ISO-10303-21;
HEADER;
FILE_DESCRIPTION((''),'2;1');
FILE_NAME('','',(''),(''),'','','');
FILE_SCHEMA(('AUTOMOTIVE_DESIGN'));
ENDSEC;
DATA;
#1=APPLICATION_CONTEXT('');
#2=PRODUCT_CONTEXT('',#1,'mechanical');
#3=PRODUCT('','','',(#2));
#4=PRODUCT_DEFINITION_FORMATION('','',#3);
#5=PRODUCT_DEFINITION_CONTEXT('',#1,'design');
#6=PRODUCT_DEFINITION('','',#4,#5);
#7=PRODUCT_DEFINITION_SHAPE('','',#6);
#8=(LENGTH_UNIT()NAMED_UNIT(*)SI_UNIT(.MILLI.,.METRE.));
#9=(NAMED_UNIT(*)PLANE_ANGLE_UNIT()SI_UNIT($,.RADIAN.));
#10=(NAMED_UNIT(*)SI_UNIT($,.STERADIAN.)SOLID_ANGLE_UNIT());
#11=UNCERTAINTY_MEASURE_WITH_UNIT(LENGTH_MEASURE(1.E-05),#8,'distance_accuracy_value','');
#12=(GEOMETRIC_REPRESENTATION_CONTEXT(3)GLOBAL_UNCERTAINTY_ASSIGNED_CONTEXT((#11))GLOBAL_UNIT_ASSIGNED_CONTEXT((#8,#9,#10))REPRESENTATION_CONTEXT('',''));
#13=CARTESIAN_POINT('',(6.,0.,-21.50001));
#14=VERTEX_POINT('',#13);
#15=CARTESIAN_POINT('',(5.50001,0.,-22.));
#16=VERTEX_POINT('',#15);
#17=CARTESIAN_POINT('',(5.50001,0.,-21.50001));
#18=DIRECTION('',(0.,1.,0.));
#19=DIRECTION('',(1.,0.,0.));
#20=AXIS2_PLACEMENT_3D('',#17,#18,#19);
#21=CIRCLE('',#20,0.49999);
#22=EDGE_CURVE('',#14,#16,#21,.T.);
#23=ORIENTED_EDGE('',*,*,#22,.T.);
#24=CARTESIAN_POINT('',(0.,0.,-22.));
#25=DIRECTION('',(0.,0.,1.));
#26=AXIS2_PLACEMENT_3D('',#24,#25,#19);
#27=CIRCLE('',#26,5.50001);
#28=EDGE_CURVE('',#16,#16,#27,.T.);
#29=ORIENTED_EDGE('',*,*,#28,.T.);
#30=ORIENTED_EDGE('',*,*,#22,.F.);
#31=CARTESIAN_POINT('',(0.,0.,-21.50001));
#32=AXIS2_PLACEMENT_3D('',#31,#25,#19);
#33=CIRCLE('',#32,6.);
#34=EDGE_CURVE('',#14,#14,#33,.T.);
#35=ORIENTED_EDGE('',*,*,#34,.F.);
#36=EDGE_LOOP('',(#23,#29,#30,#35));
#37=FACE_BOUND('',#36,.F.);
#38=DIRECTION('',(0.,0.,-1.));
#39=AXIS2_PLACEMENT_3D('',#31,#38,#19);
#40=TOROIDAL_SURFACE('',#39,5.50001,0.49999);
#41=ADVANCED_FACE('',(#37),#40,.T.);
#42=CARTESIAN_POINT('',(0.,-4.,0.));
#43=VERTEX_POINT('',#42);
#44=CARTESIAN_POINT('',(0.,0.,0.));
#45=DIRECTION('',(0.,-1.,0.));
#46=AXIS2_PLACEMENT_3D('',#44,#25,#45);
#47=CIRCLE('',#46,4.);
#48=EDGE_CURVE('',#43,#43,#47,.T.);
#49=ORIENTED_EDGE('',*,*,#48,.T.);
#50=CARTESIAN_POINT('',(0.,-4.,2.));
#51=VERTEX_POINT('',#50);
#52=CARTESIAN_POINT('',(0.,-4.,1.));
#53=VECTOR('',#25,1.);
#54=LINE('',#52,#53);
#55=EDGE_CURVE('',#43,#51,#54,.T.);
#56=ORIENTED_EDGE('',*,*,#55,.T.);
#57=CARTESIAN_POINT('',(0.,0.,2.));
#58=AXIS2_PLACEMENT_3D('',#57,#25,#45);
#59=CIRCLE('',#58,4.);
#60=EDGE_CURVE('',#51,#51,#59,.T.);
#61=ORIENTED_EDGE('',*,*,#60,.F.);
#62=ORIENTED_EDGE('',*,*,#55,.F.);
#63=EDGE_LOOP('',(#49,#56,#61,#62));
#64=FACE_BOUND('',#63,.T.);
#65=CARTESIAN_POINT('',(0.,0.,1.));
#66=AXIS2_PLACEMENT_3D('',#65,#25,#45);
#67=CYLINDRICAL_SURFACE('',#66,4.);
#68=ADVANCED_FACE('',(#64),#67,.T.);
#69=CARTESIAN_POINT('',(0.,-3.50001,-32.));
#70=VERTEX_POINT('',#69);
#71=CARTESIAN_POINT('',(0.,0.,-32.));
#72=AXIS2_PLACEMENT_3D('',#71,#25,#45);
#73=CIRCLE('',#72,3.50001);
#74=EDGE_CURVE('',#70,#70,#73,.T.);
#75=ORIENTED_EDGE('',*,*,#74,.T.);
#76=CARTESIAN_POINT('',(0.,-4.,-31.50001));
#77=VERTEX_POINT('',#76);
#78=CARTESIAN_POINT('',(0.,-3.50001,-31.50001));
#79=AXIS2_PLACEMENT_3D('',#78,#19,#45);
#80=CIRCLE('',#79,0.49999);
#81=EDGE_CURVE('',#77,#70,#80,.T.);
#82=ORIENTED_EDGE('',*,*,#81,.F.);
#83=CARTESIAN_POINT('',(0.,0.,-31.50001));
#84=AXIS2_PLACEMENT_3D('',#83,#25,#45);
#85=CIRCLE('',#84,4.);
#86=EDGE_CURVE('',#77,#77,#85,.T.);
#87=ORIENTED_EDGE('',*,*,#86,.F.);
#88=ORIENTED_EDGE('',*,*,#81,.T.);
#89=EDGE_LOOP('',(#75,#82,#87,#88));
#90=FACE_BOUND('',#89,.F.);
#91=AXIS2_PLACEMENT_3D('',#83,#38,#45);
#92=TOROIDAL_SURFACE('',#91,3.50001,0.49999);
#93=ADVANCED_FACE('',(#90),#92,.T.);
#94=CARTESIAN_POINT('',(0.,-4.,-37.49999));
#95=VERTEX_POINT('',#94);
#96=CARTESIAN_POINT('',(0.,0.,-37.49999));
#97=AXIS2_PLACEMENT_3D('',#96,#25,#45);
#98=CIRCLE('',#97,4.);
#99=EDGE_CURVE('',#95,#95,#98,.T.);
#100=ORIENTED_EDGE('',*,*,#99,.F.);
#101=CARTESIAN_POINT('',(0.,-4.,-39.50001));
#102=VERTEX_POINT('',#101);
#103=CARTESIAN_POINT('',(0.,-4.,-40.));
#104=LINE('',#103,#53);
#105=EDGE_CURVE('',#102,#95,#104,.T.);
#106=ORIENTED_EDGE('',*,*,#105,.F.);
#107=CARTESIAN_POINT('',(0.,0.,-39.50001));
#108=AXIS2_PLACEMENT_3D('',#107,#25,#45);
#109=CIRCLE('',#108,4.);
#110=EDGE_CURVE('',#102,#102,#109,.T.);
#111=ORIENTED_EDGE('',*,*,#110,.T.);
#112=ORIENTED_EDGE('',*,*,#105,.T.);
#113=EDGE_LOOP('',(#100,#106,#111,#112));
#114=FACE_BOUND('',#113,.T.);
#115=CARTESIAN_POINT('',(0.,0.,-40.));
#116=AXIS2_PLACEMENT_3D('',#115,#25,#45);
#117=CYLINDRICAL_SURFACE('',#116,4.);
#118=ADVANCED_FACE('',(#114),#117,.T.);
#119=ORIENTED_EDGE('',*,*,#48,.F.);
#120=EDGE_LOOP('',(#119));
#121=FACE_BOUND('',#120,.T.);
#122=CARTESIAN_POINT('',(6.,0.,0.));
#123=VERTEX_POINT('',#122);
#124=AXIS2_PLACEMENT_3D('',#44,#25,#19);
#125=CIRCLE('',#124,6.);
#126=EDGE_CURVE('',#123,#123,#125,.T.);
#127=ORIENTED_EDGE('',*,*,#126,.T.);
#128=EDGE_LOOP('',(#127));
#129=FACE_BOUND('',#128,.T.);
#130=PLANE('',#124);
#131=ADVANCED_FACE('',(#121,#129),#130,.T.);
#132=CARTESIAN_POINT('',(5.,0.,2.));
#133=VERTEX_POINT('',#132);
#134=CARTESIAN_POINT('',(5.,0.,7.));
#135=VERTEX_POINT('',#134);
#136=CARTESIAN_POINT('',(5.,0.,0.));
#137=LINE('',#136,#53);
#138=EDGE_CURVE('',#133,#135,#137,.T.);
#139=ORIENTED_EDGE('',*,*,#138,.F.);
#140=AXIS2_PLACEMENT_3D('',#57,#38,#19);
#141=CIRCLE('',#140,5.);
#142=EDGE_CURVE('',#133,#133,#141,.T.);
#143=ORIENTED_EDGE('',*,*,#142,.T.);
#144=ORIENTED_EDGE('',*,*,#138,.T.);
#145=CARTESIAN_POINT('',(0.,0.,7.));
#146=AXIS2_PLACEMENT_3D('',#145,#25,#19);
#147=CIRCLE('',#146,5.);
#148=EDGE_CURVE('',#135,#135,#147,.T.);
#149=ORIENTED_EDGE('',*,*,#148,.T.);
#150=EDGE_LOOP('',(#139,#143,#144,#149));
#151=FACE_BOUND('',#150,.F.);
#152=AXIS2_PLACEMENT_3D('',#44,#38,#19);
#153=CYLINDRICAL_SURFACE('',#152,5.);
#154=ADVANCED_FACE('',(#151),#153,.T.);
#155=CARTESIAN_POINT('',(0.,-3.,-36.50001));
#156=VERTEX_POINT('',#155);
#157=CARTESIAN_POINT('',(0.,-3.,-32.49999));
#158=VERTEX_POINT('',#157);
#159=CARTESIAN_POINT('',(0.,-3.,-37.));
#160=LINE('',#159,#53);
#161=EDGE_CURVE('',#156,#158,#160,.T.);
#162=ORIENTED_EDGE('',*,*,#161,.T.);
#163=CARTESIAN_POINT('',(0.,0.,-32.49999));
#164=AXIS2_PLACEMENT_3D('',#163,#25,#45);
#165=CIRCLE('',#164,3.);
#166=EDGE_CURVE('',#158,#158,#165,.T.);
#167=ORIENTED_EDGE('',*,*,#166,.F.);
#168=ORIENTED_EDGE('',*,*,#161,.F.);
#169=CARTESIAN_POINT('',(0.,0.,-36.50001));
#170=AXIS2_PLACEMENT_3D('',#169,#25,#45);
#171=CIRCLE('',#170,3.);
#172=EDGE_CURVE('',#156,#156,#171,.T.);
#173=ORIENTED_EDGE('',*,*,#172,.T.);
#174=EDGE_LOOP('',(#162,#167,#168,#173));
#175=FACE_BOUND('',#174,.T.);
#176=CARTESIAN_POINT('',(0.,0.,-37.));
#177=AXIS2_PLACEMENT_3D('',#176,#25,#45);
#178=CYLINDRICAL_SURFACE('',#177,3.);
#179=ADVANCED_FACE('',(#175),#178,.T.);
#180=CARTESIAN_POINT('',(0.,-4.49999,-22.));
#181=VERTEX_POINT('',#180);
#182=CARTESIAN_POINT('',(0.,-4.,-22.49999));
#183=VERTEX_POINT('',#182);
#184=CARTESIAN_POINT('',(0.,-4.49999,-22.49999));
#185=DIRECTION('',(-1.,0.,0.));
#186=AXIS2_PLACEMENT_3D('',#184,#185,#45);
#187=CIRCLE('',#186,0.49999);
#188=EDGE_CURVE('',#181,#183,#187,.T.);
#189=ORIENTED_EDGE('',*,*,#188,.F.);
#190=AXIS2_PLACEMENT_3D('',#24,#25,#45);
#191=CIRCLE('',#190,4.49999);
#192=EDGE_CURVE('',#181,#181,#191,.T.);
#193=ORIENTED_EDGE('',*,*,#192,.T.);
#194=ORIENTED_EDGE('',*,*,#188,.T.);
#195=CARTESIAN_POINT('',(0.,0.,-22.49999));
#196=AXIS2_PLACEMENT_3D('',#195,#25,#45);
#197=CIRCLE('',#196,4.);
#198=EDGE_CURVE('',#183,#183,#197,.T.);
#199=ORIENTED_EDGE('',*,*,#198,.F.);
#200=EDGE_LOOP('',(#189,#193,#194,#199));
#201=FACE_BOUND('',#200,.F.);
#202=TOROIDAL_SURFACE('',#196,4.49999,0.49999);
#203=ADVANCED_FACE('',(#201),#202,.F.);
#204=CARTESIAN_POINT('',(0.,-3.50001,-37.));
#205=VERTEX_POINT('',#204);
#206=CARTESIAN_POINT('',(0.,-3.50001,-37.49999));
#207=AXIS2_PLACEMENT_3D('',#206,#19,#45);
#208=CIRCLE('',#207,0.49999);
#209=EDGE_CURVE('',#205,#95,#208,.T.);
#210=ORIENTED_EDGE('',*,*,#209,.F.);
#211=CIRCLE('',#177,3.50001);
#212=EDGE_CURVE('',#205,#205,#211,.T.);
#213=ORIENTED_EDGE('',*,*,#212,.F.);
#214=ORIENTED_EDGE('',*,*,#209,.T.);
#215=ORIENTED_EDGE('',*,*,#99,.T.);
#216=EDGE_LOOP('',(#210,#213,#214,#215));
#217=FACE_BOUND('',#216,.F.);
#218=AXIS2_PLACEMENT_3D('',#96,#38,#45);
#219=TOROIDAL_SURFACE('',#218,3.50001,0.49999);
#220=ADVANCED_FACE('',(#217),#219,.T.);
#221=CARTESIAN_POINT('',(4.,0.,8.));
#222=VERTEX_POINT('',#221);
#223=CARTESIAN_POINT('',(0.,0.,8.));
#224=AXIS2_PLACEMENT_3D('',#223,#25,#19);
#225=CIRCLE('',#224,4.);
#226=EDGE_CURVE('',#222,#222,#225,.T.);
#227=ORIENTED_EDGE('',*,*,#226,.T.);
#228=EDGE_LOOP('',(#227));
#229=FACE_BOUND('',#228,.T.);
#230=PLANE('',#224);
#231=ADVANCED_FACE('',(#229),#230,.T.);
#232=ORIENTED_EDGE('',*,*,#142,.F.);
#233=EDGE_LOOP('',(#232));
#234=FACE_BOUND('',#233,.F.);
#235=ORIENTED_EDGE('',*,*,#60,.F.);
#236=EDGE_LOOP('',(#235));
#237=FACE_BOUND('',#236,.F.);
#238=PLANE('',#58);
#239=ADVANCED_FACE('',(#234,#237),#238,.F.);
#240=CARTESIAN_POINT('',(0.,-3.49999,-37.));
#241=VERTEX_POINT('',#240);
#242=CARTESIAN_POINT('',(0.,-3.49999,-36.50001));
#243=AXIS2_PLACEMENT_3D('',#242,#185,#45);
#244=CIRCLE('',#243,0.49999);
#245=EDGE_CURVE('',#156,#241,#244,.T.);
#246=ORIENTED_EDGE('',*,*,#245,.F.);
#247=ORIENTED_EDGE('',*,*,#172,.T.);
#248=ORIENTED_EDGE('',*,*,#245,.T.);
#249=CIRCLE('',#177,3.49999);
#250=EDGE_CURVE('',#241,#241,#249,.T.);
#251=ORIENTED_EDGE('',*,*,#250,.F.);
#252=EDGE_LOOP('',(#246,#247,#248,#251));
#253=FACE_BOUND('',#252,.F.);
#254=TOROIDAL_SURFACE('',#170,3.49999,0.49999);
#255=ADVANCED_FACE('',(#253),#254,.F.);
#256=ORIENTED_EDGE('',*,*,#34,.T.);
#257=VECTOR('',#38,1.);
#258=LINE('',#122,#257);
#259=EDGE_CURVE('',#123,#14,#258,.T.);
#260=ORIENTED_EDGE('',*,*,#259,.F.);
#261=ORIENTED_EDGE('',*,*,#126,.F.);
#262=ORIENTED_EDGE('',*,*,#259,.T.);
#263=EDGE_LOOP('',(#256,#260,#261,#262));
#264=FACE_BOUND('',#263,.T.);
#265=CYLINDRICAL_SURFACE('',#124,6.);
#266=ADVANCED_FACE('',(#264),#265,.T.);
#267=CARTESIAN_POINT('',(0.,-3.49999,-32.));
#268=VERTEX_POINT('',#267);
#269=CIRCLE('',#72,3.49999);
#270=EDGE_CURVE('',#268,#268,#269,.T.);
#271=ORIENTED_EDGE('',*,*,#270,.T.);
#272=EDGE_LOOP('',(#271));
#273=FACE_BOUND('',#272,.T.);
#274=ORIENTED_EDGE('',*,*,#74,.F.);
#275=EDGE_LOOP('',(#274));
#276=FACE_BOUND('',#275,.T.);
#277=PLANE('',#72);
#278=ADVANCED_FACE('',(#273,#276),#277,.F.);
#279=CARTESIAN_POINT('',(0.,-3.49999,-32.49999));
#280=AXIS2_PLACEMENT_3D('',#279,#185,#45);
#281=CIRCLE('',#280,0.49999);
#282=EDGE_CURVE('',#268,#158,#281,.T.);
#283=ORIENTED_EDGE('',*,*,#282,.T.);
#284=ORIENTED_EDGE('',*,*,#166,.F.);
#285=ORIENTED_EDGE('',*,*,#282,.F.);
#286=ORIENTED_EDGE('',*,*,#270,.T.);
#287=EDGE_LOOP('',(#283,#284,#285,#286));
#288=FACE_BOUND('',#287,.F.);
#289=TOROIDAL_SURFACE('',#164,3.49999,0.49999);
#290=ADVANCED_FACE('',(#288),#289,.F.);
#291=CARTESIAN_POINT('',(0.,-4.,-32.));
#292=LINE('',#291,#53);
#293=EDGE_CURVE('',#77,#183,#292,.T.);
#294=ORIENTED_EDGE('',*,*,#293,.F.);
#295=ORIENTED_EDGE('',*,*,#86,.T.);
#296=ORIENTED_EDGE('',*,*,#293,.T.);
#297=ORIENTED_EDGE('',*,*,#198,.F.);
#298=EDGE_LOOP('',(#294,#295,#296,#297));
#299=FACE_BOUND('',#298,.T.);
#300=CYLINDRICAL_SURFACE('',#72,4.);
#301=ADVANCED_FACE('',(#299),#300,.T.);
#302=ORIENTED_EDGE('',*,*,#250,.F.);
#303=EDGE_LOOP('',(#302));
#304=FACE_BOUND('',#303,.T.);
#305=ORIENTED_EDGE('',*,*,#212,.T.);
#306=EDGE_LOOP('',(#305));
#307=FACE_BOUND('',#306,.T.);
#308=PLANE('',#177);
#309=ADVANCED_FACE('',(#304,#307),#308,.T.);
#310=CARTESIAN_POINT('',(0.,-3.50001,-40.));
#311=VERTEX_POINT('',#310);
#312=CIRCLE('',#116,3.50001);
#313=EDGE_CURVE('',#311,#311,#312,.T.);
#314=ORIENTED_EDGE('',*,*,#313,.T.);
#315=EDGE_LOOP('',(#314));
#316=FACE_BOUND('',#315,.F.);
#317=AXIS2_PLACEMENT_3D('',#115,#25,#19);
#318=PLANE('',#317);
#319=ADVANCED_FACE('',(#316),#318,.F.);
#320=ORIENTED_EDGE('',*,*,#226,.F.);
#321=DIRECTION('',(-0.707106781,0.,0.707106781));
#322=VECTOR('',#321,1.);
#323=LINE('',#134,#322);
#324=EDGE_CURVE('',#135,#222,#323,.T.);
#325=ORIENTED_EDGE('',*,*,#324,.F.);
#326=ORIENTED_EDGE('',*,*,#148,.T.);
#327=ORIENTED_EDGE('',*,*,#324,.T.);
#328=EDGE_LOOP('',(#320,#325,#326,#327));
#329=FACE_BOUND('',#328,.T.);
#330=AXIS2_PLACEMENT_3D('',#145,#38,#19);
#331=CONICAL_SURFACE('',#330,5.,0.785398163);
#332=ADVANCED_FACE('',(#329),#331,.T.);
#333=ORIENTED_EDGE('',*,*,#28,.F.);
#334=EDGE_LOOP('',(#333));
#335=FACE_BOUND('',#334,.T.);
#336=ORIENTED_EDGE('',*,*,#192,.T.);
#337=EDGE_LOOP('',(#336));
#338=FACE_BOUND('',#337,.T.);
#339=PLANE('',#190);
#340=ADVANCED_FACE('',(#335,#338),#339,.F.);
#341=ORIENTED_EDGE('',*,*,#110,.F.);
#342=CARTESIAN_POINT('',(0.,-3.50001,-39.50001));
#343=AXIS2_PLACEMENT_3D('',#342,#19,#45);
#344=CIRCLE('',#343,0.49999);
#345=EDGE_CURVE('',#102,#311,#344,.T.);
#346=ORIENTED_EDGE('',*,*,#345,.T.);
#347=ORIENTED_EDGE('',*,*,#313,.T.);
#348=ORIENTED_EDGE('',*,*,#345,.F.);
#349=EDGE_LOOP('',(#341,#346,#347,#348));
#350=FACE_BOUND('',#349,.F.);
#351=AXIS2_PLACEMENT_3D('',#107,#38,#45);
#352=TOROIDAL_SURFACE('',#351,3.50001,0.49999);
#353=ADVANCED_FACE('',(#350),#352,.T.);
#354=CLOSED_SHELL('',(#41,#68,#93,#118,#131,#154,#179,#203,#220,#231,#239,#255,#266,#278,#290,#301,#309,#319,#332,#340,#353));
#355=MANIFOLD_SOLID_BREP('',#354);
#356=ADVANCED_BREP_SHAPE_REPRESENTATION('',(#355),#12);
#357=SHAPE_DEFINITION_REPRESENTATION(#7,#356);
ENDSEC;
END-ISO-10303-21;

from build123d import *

# Parameters (mm, degrees)
F0_R     = 6
F1_DEPTH = 40
F2_R     = 5
F3_DEPTH = 8
F6_R     = 0.49999
F7_W     = 1
F7_H     = 2
F9_SIZE  = 1


# Not quite as in the source:
# - a fillet or chamfer is up to 0.001 mm smaller than in the source, because OpenCascade refuses the exact size


with BuildPart() as f1:
    # F0 (on Top) → F1 (new body)
    with BuildSketch(Plane.XY):
        Circle(F0_R)
    extrude(amount=-F1_DEPTH)

    # F2 (on face) → F3 (join)
    with BuildSketch(Plane.XY):
        Circle(F2_R)
    extrude(amount=F3_DEPTH)

    # F4 (on Right) → F5 (revolve, cut)
    with BuildSketch(Plane.YZ):
        Polygon((-6, -22), (-6, -40), (-4, -40), (-4, -37), (-3, -37), (-3, -32), (-4, -32), (-4, -22), align=None)
    revolve(axis=Axis((0, 0, -26.2926705182), (0, 0, 1)), mode=Mode.SUBTRACT)

    # F6 (radius 0.5 in the source; OpenCascade refuses exactly that, so slightly less here)
    f6_edges = [f1.edges().sort_by_distance(p)[0] for p in [
        (0, 4, -40),
        (0, 4, -37),
        (0, 3, -37),
        (0, 3, -32),
        (0, 4, -32),
        (0, 4, -22),
        (-6, 0, -22),
    ]]
    fillet(f6_edges, radius=F6_R)

    # F7 (on Right) → F8 (revolve, cut)
    with BuildSketch(Plane.YZ):
        with Locations((-4.5, 1)):
            Rectangle(F7_W, F7_H)
    revolve(axis=Axis((0, 0, 11.1455004662), (0, 0, 1)), mode=Mode.SUBTRACT)

    # F9
    f9_edges = [f1.edges().sort_by_distance(p)[0] for p in [
        (-5, 0, 8),
    ]]
    chamfer(f9_edges, length=F9_SIZE)


solid = f1.part
